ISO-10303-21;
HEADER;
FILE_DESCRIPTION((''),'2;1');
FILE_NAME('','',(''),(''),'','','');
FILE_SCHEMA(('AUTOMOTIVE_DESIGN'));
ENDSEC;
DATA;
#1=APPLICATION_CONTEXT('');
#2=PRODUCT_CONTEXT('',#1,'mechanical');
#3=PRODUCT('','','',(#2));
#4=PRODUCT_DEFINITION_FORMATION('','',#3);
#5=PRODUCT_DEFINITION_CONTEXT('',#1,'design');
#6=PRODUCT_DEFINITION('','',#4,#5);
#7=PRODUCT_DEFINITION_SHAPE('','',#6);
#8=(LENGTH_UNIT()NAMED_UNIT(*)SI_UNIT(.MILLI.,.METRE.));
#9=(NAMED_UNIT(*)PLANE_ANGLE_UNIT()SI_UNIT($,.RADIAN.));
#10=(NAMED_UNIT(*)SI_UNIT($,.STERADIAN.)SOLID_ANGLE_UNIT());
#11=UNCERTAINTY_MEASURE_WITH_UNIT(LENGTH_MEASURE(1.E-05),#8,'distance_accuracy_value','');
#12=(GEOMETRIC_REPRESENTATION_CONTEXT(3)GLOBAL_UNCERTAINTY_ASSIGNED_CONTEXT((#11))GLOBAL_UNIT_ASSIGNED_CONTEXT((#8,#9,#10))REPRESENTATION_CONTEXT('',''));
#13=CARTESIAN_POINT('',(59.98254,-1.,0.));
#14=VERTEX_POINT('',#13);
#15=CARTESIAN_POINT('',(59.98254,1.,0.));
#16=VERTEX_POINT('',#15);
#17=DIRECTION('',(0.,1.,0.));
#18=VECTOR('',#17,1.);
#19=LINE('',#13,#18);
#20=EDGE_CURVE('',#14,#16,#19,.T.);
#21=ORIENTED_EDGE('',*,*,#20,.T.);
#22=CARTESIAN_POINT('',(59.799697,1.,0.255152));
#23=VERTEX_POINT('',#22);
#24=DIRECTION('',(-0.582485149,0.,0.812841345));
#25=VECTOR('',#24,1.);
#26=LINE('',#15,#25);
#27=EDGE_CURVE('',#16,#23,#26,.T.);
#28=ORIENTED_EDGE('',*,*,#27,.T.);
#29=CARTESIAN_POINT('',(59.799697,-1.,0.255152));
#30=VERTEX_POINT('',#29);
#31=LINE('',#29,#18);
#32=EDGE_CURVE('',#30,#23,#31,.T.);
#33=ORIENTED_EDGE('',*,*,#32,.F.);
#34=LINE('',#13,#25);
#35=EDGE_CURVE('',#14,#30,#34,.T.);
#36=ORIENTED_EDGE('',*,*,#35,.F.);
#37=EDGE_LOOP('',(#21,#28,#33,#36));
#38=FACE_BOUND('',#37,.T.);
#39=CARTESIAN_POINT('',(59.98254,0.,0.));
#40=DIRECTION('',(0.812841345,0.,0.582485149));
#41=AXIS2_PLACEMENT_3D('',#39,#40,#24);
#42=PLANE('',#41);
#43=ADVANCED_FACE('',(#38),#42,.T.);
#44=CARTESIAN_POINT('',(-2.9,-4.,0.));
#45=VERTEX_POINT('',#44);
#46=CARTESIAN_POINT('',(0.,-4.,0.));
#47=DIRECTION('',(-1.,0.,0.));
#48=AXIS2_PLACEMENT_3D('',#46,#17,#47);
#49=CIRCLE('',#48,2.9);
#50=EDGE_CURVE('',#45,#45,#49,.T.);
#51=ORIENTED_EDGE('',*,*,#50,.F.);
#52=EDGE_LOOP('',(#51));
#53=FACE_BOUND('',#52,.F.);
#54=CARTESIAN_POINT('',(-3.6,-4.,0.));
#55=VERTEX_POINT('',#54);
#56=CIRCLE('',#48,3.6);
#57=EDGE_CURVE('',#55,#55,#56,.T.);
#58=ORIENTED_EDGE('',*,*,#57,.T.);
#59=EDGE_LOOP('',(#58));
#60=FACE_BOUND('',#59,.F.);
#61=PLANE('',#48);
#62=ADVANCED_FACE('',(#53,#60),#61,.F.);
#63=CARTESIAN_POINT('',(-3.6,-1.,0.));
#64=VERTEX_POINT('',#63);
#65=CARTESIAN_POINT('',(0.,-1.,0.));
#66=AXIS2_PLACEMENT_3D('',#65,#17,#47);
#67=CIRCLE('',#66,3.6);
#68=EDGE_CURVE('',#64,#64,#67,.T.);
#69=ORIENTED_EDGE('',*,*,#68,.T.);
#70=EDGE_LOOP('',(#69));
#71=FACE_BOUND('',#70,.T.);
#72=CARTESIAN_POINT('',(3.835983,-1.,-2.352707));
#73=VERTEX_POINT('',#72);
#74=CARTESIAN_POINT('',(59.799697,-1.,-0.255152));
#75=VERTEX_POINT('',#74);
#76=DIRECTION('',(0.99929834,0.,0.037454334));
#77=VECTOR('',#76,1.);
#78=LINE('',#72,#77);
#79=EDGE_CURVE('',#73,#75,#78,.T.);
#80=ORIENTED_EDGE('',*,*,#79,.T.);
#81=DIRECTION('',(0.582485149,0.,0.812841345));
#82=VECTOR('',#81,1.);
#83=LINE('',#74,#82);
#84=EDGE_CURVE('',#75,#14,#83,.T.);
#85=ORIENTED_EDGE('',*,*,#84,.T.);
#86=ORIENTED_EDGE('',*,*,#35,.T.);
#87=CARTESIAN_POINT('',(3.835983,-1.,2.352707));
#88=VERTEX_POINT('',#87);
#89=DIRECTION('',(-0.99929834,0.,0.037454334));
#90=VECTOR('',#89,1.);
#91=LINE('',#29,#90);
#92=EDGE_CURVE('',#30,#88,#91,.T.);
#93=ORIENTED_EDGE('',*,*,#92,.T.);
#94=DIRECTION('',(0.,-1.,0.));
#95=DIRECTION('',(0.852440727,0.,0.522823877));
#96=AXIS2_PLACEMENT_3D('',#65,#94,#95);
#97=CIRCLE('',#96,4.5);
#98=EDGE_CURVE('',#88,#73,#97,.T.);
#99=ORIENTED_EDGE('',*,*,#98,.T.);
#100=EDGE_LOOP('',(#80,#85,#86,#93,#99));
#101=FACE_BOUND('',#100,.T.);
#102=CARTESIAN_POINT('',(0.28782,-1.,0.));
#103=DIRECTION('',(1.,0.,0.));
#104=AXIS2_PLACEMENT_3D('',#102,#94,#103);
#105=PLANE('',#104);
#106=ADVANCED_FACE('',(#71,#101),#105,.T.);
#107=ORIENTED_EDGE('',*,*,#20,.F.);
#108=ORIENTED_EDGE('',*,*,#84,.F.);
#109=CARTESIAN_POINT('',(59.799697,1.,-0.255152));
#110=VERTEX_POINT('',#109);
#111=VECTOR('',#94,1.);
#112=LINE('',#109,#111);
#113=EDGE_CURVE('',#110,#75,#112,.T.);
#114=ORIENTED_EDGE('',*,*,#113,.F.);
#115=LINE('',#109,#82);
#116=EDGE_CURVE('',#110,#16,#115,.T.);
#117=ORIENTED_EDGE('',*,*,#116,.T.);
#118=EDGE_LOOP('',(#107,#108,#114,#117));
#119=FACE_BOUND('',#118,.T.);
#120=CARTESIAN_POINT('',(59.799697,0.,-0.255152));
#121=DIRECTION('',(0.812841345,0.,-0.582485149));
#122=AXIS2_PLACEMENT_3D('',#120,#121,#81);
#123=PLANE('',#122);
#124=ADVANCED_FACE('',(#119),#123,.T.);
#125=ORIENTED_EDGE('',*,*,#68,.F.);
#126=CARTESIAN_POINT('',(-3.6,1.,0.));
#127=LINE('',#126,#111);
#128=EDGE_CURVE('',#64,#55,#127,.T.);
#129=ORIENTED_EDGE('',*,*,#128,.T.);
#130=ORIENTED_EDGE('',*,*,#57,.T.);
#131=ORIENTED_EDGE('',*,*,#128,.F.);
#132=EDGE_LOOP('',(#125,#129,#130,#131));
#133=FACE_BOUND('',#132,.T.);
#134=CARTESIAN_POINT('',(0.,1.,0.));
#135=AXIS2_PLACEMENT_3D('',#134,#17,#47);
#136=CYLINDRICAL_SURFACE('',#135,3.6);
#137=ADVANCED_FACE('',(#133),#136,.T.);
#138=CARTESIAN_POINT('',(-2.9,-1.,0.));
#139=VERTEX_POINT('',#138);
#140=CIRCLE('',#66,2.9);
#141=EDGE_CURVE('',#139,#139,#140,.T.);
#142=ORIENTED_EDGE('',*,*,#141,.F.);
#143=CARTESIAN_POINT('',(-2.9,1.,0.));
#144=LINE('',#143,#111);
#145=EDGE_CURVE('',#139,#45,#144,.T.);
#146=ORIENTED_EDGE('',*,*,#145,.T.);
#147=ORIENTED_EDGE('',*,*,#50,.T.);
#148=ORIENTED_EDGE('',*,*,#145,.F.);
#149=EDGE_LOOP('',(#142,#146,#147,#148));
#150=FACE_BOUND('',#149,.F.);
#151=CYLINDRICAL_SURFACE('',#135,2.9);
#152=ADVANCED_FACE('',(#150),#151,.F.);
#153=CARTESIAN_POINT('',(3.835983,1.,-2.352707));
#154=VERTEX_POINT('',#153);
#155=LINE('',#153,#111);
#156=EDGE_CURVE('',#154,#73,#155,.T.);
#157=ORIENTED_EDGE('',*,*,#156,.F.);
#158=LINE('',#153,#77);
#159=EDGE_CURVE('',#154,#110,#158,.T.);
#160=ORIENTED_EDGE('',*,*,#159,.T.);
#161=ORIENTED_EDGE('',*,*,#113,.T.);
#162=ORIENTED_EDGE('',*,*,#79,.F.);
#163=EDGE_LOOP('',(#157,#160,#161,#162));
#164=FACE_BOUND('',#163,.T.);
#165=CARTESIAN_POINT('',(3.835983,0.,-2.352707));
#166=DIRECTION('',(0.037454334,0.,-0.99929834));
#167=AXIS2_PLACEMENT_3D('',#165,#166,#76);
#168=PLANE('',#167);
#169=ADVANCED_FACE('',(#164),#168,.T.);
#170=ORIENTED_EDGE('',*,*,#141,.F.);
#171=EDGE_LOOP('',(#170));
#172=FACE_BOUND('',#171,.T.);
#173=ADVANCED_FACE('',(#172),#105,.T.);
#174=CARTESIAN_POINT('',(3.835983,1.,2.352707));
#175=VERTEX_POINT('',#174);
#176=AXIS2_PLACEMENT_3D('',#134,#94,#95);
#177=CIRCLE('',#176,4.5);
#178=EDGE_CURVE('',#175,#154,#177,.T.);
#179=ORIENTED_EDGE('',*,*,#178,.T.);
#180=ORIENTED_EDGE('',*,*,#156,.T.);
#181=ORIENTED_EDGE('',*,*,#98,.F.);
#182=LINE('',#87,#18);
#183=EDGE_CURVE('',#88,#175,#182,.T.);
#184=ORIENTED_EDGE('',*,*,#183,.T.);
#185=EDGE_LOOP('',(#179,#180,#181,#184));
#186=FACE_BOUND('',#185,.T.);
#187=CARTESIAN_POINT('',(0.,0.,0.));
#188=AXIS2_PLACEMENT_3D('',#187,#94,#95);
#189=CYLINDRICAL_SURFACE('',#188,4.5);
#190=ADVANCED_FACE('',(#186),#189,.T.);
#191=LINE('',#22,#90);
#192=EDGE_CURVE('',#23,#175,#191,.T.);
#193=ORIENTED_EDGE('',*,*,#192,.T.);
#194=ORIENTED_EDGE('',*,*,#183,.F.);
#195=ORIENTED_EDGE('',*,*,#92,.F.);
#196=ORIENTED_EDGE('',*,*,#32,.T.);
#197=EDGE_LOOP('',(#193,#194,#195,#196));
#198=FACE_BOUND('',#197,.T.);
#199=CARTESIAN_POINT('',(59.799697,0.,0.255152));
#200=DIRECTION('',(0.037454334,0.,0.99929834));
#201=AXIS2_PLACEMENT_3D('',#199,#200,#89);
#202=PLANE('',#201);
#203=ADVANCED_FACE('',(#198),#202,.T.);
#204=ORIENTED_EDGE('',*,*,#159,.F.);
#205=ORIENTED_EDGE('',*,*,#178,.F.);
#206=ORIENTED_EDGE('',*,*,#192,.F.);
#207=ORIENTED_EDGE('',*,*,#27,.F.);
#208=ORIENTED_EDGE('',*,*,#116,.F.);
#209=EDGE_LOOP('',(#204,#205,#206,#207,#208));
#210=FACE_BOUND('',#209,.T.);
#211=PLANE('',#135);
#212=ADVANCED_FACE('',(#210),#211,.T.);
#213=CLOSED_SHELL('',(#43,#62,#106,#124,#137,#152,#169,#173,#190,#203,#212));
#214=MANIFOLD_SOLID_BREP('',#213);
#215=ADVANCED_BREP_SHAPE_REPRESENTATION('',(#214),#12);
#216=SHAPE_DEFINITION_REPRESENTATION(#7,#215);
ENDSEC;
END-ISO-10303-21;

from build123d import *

# Parameters (mm, degrees)
F1_DEPTH = 1
F2_R     = 3.6
F2_R_2   = 2.9
F3_DEPTH = 5
F4_DEPTH = 1


with BuildPart() as f1:
    # F0 (on Front) → F1 (new body, symmetric)
    with BuildSketch(Plane.XZ):
        with BuildLine():
            ThreePointArc((3.8359832735, -2.3527074457), (4.3308154389, -1.2223083222), (4.5, 0))
            ThreePointArc((4.5, 0), (4.3308154389, 1.2223083222), (3.8359832735, 2.3527074457))
            ThreePointArc((3.8359832735, 2.3527074457), (-4.5, 0), (3.8359832735, -2.3527074457))
        make_face()
        with BuildLine():
            ThreePointArc((3.8359832735, 2.3527074457), (4.3308154389, 1.2223083222), (4.5, 0))
            ThreePointArc((4.5, 0), (4.3308154389, -1.2223083222), (3.8359832735, -2.3527074457))
            Line((3.8359832735, -2.3527074457), (59.7996972501, -0.2551520593))
            Line((59.7996972501, -0.2551520593), (59.9825401634, -9.9e-09))
            Line((59.9825401634, -9.9e-09), (59.7996972501, 0.2551520395))
            Line((59.7996972501, 0.2551520395), (3.8359832735, 2.3527074457))
        make_face()
    extrude(amount=F1_DEPTH, both=True)

    # F2 (on face) → F3 (join)
    with BuildSketch(Plane(origin=(0, 1, 0), x_dir=(-1, 0, 0), z_dir=(0, 1, 0))):
        Circle(F2_R)
        Circle(F2_R_2, mode=Mode.SUBTRACT)
    extrude(amount=-F3_DEPTH)

    # F0 (on Front) → F4 (join, symmetric)
    with BuildSketch(Plane.XZ):
        with BuildLine():
            ThreePointArc((3.8359832735, 2.3527074457), (4.3308154389, 1.2223083222), (4.5, 0))
            ThreePointArc((4.5, 0), (4.3308154389, -1.2223083222), (3.8359832735, -2.3527074457))
            Line((3.8359832735, -2.3527074457), (59.7996972501, -0.2551520593))
            Line((59.7996972501, -0.2551520593), (59.9825401634, -9.9e-09))
            Line((59.9825401634, -9.9e-09), (59.7996972501, 0.2551520395))
            Line((59.7996972501, 0.2551520395), (3.8359832735, 2.3527074457))
        make_face()
    extrude(amount=F4_DEPTH, both=True)


solid = f1.part
